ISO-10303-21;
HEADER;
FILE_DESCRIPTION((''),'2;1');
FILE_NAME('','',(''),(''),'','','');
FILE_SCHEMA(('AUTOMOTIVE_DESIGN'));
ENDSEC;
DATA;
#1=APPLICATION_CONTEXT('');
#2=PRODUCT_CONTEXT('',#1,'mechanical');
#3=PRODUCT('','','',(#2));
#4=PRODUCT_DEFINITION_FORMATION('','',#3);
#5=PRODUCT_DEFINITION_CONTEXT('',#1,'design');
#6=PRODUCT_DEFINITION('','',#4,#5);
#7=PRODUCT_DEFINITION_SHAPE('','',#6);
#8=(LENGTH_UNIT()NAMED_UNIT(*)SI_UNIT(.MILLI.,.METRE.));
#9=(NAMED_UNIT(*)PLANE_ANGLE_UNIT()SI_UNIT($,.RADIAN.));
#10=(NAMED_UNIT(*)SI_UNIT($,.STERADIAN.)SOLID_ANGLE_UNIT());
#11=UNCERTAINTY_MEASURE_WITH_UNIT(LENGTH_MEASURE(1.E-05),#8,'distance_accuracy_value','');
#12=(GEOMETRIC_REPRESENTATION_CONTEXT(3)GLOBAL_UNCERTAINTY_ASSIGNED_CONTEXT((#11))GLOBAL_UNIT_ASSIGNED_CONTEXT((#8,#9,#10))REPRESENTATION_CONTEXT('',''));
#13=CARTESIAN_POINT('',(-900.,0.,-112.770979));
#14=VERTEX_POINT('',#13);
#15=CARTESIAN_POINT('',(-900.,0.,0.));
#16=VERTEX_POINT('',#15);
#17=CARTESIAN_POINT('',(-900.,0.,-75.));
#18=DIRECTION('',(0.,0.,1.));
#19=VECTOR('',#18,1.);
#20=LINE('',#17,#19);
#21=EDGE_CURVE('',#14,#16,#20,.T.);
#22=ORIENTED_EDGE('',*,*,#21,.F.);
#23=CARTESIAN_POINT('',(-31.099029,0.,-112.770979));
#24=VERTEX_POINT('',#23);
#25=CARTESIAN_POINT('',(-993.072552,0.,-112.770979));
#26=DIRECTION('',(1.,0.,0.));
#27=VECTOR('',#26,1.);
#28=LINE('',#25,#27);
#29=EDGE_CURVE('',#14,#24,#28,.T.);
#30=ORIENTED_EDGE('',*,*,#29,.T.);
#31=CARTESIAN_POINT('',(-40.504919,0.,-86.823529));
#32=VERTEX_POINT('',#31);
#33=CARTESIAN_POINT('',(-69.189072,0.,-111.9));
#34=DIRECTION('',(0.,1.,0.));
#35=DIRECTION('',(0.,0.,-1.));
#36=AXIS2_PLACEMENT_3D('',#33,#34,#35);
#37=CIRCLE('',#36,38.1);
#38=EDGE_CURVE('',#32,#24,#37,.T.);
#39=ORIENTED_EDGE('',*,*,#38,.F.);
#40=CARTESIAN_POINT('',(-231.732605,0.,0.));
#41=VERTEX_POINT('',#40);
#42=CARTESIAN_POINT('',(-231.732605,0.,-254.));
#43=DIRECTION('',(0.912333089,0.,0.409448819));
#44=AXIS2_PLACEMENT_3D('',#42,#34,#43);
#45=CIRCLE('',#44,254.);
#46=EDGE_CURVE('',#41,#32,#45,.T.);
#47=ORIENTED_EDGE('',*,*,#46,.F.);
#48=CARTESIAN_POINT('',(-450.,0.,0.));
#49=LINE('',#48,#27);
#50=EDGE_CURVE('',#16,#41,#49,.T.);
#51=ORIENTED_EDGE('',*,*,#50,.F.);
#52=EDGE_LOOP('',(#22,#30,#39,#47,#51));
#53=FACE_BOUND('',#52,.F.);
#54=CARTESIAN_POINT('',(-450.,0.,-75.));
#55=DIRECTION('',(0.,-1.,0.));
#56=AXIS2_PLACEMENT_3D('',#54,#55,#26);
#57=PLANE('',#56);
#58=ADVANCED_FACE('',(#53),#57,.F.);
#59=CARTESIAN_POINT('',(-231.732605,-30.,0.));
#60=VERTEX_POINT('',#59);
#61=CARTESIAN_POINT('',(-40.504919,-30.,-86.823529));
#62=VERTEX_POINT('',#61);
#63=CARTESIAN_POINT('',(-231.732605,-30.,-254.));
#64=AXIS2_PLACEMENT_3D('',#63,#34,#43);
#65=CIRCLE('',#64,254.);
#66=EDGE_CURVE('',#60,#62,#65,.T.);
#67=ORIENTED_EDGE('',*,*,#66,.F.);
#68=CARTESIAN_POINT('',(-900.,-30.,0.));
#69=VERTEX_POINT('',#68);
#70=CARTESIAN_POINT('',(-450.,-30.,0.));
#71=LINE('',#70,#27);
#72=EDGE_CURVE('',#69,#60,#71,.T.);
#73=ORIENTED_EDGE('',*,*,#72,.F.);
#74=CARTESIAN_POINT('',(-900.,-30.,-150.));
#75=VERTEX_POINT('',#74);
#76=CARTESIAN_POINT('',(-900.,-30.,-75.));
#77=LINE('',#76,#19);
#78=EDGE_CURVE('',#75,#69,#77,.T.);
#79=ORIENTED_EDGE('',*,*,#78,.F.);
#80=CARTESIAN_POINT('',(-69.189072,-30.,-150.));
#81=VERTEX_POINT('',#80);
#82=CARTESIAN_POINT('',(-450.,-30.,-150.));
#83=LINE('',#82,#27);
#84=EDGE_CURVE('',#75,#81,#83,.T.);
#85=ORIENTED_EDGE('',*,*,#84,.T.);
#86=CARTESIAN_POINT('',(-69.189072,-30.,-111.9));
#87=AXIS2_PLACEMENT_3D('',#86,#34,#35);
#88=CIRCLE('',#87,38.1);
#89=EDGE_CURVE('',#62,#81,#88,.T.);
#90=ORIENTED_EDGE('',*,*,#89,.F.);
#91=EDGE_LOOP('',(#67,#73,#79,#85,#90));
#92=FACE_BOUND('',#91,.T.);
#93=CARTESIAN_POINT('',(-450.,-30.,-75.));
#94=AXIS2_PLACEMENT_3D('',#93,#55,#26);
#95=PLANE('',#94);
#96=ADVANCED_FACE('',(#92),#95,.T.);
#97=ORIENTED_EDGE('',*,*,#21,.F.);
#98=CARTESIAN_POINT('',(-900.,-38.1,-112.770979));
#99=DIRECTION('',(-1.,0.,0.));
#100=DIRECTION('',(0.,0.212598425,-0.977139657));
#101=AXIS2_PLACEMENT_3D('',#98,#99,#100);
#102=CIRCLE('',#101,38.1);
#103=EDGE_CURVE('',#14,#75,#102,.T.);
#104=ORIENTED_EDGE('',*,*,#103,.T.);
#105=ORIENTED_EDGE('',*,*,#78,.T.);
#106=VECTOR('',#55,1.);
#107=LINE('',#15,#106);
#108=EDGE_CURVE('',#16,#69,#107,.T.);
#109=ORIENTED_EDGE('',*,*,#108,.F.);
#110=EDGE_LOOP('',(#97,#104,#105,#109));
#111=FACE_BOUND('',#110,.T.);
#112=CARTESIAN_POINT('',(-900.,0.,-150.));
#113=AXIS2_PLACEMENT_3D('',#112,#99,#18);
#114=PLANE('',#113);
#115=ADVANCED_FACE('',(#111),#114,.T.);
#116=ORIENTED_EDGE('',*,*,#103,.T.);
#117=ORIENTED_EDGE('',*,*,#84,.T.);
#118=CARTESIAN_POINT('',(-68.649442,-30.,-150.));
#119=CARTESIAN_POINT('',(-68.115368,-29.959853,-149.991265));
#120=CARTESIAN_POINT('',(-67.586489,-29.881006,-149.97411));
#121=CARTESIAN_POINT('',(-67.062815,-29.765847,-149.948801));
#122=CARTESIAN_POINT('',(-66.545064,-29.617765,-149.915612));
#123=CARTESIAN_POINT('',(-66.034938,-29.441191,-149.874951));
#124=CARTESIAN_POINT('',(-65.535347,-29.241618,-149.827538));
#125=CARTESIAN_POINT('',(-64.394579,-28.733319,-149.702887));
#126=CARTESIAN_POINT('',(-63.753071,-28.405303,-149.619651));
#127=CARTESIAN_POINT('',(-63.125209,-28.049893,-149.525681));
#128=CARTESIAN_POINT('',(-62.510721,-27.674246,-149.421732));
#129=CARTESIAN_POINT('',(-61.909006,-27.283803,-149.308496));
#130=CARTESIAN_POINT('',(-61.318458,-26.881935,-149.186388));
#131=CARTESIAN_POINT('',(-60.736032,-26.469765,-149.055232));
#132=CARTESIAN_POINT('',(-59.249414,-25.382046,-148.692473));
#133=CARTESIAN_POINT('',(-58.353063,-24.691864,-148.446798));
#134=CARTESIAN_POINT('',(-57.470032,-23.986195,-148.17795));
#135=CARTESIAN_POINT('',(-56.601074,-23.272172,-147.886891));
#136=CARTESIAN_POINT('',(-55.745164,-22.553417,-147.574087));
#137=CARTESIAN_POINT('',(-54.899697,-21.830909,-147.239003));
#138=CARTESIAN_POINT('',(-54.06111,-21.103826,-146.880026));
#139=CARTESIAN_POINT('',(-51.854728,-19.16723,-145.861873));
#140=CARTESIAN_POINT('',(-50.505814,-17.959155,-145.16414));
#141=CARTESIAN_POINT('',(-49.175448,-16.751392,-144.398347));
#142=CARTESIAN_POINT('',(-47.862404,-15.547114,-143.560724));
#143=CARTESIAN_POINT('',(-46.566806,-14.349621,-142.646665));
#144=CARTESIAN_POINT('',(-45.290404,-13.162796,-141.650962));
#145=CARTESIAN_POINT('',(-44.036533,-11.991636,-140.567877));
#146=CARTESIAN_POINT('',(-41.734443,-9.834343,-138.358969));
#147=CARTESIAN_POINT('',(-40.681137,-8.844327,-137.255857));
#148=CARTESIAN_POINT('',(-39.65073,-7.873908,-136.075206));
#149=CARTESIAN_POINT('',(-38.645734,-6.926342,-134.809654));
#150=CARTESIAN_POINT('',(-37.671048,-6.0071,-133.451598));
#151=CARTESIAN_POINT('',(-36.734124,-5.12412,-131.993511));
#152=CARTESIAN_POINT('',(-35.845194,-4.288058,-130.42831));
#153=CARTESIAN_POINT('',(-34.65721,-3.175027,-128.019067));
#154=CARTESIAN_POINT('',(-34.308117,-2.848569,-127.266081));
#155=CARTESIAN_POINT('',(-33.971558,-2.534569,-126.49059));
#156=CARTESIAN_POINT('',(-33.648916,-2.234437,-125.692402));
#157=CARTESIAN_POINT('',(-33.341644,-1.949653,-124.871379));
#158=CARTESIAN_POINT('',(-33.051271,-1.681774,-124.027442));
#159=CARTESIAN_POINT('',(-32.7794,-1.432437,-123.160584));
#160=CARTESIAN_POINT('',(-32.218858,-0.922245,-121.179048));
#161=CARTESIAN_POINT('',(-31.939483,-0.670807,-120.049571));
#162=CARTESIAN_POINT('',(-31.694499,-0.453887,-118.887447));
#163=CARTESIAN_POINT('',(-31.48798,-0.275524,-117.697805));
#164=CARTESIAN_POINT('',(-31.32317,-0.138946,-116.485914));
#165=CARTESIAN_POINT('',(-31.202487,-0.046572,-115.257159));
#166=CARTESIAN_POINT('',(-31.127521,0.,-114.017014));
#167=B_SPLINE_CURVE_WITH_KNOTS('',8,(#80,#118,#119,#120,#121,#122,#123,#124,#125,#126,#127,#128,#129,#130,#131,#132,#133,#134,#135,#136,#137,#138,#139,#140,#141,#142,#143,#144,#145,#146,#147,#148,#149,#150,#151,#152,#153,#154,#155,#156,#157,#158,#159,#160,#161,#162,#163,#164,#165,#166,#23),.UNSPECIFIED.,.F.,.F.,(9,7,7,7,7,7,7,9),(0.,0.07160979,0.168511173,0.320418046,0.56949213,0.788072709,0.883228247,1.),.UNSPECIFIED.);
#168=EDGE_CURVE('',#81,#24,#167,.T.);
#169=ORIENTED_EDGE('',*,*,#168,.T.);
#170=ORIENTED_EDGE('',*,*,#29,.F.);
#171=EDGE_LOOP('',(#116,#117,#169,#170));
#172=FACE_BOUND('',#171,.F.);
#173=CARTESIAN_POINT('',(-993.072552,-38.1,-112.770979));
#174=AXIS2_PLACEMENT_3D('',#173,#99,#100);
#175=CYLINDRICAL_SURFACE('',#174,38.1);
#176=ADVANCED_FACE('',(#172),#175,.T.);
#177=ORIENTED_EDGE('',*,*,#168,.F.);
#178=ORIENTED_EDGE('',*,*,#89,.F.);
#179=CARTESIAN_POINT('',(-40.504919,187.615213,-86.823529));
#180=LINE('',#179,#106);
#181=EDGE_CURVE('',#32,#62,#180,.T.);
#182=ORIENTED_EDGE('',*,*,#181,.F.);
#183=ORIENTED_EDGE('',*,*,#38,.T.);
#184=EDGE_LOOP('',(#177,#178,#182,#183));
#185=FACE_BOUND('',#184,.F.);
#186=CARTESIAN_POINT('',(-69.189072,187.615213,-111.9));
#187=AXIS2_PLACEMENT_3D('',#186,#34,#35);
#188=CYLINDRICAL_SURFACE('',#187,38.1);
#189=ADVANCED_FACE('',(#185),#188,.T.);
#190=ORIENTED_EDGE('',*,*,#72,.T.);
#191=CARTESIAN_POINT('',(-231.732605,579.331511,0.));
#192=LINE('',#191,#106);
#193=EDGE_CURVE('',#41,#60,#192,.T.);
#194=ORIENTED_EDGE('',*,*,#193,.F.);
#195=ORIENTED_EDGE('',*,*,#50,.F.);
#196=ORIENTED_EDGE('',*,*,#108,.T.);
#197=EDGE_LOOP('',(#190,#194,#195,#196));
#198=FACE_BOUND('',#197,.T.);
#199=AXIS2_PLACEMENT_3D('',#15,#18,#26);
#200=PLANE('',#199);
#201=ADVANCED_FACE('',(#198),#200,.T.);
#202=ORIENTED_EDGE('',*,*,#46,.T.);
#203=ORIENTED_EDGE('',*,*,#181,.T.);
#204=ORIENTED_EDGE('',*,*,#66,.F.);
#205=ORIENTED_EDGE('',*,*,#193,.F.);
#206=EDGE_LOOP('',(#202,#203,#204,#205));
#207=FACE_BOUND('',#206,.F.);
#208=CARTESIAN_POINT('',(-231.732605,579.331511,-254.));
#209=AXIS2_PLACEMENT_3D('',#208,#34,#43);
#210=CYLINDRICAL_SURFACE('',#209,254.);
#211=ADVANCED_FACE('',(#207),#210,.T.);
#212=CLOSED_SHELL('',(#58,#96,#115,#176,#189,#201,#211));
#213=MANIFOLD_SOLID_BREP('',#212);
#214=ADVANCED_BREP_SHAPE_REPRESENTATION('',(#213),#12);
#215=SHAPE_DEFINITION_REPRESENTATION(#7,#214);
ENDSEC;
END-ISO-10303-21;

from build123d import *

# Parameters (mm, degrees)
F0_W        = 900
F0_H        = 150
F1_DEPTH    = 30
F2_T1_DEPTH = 1188.6630226256
F3_T1_DEPTH = 405.2304260538
F3_T3_DEPTH = 1086.1451046899


# Not quite as in the source:
# - a fillet or chamfer that OpenCascade refuses, or shapes differently, is made with other operations: its cross-section is extruded or revolved along the edge and cut away or added


with BuildPart() as f1:
    # F0 (on Front) → F1 (new body)
    with BuildSketch(Plane.XZ):
        with Locations((-450, -75)):
            Rectangle(F0_W, F0_H)
    extrude(amount=F1_DEPTH)

    # F2: fillet of radius 254 on 1 edges, made by hand

    # F2_s2 → F2_t1 (cut)
    with BuildSketch(Plane.XZ.offset(-579.3315113128)):
        with BuildLine():
            ThreePointArc((0, -150), (-93.7108671067, -40.7724220463), (-231.7326045251, 0))
            Line((-231.7326045251, 0), (0, 0))
            Line((0, 0), (0, -150))
        make_face()
    extrude(amount=F2_T1_DEPTH, mode=Mode.SUBTRACT)

    # F3: fillet of radius 38.1 on 2 edges, made by hand

    # F3_s2 → F3_t1 (cut)
    with BuildSketch(Plane.XZ.offset(-187.6152130269)):
        with BuildLine():
            ThreePointArc((-69.1890718946, -150), (-34.4974048158, -127.6511344129), (-40.5049190775, -86.8235294118))
            ThreePointArc((-40.5049190775, -86.8235294118), (-17.9063471748, -116.9075798319), (0, -150))
            Line((0, -150), (-69.1890718946, -150))
        make_face()
    extrude(amount=F3_T1_DEPTH, mode=Mode.SUBTRACT)

    # F3_s4 → F3_t3 (cut)
    with BuildSketch(Plane.YZ.offset(-993.0725523449)):
        with BuildLine():
            ThreePointArc((-30, -150), (-8.4333520599, -136.6770452378), (0, -112.770979062))
            Line((0, -112.770979062), (0, -150))
            Line((0, -150), (-30, -150))
        make_face()
    extrude(amount=F3_T3_DEPTH, mode=Mode.SUBTRACT)


solid = f1.part
